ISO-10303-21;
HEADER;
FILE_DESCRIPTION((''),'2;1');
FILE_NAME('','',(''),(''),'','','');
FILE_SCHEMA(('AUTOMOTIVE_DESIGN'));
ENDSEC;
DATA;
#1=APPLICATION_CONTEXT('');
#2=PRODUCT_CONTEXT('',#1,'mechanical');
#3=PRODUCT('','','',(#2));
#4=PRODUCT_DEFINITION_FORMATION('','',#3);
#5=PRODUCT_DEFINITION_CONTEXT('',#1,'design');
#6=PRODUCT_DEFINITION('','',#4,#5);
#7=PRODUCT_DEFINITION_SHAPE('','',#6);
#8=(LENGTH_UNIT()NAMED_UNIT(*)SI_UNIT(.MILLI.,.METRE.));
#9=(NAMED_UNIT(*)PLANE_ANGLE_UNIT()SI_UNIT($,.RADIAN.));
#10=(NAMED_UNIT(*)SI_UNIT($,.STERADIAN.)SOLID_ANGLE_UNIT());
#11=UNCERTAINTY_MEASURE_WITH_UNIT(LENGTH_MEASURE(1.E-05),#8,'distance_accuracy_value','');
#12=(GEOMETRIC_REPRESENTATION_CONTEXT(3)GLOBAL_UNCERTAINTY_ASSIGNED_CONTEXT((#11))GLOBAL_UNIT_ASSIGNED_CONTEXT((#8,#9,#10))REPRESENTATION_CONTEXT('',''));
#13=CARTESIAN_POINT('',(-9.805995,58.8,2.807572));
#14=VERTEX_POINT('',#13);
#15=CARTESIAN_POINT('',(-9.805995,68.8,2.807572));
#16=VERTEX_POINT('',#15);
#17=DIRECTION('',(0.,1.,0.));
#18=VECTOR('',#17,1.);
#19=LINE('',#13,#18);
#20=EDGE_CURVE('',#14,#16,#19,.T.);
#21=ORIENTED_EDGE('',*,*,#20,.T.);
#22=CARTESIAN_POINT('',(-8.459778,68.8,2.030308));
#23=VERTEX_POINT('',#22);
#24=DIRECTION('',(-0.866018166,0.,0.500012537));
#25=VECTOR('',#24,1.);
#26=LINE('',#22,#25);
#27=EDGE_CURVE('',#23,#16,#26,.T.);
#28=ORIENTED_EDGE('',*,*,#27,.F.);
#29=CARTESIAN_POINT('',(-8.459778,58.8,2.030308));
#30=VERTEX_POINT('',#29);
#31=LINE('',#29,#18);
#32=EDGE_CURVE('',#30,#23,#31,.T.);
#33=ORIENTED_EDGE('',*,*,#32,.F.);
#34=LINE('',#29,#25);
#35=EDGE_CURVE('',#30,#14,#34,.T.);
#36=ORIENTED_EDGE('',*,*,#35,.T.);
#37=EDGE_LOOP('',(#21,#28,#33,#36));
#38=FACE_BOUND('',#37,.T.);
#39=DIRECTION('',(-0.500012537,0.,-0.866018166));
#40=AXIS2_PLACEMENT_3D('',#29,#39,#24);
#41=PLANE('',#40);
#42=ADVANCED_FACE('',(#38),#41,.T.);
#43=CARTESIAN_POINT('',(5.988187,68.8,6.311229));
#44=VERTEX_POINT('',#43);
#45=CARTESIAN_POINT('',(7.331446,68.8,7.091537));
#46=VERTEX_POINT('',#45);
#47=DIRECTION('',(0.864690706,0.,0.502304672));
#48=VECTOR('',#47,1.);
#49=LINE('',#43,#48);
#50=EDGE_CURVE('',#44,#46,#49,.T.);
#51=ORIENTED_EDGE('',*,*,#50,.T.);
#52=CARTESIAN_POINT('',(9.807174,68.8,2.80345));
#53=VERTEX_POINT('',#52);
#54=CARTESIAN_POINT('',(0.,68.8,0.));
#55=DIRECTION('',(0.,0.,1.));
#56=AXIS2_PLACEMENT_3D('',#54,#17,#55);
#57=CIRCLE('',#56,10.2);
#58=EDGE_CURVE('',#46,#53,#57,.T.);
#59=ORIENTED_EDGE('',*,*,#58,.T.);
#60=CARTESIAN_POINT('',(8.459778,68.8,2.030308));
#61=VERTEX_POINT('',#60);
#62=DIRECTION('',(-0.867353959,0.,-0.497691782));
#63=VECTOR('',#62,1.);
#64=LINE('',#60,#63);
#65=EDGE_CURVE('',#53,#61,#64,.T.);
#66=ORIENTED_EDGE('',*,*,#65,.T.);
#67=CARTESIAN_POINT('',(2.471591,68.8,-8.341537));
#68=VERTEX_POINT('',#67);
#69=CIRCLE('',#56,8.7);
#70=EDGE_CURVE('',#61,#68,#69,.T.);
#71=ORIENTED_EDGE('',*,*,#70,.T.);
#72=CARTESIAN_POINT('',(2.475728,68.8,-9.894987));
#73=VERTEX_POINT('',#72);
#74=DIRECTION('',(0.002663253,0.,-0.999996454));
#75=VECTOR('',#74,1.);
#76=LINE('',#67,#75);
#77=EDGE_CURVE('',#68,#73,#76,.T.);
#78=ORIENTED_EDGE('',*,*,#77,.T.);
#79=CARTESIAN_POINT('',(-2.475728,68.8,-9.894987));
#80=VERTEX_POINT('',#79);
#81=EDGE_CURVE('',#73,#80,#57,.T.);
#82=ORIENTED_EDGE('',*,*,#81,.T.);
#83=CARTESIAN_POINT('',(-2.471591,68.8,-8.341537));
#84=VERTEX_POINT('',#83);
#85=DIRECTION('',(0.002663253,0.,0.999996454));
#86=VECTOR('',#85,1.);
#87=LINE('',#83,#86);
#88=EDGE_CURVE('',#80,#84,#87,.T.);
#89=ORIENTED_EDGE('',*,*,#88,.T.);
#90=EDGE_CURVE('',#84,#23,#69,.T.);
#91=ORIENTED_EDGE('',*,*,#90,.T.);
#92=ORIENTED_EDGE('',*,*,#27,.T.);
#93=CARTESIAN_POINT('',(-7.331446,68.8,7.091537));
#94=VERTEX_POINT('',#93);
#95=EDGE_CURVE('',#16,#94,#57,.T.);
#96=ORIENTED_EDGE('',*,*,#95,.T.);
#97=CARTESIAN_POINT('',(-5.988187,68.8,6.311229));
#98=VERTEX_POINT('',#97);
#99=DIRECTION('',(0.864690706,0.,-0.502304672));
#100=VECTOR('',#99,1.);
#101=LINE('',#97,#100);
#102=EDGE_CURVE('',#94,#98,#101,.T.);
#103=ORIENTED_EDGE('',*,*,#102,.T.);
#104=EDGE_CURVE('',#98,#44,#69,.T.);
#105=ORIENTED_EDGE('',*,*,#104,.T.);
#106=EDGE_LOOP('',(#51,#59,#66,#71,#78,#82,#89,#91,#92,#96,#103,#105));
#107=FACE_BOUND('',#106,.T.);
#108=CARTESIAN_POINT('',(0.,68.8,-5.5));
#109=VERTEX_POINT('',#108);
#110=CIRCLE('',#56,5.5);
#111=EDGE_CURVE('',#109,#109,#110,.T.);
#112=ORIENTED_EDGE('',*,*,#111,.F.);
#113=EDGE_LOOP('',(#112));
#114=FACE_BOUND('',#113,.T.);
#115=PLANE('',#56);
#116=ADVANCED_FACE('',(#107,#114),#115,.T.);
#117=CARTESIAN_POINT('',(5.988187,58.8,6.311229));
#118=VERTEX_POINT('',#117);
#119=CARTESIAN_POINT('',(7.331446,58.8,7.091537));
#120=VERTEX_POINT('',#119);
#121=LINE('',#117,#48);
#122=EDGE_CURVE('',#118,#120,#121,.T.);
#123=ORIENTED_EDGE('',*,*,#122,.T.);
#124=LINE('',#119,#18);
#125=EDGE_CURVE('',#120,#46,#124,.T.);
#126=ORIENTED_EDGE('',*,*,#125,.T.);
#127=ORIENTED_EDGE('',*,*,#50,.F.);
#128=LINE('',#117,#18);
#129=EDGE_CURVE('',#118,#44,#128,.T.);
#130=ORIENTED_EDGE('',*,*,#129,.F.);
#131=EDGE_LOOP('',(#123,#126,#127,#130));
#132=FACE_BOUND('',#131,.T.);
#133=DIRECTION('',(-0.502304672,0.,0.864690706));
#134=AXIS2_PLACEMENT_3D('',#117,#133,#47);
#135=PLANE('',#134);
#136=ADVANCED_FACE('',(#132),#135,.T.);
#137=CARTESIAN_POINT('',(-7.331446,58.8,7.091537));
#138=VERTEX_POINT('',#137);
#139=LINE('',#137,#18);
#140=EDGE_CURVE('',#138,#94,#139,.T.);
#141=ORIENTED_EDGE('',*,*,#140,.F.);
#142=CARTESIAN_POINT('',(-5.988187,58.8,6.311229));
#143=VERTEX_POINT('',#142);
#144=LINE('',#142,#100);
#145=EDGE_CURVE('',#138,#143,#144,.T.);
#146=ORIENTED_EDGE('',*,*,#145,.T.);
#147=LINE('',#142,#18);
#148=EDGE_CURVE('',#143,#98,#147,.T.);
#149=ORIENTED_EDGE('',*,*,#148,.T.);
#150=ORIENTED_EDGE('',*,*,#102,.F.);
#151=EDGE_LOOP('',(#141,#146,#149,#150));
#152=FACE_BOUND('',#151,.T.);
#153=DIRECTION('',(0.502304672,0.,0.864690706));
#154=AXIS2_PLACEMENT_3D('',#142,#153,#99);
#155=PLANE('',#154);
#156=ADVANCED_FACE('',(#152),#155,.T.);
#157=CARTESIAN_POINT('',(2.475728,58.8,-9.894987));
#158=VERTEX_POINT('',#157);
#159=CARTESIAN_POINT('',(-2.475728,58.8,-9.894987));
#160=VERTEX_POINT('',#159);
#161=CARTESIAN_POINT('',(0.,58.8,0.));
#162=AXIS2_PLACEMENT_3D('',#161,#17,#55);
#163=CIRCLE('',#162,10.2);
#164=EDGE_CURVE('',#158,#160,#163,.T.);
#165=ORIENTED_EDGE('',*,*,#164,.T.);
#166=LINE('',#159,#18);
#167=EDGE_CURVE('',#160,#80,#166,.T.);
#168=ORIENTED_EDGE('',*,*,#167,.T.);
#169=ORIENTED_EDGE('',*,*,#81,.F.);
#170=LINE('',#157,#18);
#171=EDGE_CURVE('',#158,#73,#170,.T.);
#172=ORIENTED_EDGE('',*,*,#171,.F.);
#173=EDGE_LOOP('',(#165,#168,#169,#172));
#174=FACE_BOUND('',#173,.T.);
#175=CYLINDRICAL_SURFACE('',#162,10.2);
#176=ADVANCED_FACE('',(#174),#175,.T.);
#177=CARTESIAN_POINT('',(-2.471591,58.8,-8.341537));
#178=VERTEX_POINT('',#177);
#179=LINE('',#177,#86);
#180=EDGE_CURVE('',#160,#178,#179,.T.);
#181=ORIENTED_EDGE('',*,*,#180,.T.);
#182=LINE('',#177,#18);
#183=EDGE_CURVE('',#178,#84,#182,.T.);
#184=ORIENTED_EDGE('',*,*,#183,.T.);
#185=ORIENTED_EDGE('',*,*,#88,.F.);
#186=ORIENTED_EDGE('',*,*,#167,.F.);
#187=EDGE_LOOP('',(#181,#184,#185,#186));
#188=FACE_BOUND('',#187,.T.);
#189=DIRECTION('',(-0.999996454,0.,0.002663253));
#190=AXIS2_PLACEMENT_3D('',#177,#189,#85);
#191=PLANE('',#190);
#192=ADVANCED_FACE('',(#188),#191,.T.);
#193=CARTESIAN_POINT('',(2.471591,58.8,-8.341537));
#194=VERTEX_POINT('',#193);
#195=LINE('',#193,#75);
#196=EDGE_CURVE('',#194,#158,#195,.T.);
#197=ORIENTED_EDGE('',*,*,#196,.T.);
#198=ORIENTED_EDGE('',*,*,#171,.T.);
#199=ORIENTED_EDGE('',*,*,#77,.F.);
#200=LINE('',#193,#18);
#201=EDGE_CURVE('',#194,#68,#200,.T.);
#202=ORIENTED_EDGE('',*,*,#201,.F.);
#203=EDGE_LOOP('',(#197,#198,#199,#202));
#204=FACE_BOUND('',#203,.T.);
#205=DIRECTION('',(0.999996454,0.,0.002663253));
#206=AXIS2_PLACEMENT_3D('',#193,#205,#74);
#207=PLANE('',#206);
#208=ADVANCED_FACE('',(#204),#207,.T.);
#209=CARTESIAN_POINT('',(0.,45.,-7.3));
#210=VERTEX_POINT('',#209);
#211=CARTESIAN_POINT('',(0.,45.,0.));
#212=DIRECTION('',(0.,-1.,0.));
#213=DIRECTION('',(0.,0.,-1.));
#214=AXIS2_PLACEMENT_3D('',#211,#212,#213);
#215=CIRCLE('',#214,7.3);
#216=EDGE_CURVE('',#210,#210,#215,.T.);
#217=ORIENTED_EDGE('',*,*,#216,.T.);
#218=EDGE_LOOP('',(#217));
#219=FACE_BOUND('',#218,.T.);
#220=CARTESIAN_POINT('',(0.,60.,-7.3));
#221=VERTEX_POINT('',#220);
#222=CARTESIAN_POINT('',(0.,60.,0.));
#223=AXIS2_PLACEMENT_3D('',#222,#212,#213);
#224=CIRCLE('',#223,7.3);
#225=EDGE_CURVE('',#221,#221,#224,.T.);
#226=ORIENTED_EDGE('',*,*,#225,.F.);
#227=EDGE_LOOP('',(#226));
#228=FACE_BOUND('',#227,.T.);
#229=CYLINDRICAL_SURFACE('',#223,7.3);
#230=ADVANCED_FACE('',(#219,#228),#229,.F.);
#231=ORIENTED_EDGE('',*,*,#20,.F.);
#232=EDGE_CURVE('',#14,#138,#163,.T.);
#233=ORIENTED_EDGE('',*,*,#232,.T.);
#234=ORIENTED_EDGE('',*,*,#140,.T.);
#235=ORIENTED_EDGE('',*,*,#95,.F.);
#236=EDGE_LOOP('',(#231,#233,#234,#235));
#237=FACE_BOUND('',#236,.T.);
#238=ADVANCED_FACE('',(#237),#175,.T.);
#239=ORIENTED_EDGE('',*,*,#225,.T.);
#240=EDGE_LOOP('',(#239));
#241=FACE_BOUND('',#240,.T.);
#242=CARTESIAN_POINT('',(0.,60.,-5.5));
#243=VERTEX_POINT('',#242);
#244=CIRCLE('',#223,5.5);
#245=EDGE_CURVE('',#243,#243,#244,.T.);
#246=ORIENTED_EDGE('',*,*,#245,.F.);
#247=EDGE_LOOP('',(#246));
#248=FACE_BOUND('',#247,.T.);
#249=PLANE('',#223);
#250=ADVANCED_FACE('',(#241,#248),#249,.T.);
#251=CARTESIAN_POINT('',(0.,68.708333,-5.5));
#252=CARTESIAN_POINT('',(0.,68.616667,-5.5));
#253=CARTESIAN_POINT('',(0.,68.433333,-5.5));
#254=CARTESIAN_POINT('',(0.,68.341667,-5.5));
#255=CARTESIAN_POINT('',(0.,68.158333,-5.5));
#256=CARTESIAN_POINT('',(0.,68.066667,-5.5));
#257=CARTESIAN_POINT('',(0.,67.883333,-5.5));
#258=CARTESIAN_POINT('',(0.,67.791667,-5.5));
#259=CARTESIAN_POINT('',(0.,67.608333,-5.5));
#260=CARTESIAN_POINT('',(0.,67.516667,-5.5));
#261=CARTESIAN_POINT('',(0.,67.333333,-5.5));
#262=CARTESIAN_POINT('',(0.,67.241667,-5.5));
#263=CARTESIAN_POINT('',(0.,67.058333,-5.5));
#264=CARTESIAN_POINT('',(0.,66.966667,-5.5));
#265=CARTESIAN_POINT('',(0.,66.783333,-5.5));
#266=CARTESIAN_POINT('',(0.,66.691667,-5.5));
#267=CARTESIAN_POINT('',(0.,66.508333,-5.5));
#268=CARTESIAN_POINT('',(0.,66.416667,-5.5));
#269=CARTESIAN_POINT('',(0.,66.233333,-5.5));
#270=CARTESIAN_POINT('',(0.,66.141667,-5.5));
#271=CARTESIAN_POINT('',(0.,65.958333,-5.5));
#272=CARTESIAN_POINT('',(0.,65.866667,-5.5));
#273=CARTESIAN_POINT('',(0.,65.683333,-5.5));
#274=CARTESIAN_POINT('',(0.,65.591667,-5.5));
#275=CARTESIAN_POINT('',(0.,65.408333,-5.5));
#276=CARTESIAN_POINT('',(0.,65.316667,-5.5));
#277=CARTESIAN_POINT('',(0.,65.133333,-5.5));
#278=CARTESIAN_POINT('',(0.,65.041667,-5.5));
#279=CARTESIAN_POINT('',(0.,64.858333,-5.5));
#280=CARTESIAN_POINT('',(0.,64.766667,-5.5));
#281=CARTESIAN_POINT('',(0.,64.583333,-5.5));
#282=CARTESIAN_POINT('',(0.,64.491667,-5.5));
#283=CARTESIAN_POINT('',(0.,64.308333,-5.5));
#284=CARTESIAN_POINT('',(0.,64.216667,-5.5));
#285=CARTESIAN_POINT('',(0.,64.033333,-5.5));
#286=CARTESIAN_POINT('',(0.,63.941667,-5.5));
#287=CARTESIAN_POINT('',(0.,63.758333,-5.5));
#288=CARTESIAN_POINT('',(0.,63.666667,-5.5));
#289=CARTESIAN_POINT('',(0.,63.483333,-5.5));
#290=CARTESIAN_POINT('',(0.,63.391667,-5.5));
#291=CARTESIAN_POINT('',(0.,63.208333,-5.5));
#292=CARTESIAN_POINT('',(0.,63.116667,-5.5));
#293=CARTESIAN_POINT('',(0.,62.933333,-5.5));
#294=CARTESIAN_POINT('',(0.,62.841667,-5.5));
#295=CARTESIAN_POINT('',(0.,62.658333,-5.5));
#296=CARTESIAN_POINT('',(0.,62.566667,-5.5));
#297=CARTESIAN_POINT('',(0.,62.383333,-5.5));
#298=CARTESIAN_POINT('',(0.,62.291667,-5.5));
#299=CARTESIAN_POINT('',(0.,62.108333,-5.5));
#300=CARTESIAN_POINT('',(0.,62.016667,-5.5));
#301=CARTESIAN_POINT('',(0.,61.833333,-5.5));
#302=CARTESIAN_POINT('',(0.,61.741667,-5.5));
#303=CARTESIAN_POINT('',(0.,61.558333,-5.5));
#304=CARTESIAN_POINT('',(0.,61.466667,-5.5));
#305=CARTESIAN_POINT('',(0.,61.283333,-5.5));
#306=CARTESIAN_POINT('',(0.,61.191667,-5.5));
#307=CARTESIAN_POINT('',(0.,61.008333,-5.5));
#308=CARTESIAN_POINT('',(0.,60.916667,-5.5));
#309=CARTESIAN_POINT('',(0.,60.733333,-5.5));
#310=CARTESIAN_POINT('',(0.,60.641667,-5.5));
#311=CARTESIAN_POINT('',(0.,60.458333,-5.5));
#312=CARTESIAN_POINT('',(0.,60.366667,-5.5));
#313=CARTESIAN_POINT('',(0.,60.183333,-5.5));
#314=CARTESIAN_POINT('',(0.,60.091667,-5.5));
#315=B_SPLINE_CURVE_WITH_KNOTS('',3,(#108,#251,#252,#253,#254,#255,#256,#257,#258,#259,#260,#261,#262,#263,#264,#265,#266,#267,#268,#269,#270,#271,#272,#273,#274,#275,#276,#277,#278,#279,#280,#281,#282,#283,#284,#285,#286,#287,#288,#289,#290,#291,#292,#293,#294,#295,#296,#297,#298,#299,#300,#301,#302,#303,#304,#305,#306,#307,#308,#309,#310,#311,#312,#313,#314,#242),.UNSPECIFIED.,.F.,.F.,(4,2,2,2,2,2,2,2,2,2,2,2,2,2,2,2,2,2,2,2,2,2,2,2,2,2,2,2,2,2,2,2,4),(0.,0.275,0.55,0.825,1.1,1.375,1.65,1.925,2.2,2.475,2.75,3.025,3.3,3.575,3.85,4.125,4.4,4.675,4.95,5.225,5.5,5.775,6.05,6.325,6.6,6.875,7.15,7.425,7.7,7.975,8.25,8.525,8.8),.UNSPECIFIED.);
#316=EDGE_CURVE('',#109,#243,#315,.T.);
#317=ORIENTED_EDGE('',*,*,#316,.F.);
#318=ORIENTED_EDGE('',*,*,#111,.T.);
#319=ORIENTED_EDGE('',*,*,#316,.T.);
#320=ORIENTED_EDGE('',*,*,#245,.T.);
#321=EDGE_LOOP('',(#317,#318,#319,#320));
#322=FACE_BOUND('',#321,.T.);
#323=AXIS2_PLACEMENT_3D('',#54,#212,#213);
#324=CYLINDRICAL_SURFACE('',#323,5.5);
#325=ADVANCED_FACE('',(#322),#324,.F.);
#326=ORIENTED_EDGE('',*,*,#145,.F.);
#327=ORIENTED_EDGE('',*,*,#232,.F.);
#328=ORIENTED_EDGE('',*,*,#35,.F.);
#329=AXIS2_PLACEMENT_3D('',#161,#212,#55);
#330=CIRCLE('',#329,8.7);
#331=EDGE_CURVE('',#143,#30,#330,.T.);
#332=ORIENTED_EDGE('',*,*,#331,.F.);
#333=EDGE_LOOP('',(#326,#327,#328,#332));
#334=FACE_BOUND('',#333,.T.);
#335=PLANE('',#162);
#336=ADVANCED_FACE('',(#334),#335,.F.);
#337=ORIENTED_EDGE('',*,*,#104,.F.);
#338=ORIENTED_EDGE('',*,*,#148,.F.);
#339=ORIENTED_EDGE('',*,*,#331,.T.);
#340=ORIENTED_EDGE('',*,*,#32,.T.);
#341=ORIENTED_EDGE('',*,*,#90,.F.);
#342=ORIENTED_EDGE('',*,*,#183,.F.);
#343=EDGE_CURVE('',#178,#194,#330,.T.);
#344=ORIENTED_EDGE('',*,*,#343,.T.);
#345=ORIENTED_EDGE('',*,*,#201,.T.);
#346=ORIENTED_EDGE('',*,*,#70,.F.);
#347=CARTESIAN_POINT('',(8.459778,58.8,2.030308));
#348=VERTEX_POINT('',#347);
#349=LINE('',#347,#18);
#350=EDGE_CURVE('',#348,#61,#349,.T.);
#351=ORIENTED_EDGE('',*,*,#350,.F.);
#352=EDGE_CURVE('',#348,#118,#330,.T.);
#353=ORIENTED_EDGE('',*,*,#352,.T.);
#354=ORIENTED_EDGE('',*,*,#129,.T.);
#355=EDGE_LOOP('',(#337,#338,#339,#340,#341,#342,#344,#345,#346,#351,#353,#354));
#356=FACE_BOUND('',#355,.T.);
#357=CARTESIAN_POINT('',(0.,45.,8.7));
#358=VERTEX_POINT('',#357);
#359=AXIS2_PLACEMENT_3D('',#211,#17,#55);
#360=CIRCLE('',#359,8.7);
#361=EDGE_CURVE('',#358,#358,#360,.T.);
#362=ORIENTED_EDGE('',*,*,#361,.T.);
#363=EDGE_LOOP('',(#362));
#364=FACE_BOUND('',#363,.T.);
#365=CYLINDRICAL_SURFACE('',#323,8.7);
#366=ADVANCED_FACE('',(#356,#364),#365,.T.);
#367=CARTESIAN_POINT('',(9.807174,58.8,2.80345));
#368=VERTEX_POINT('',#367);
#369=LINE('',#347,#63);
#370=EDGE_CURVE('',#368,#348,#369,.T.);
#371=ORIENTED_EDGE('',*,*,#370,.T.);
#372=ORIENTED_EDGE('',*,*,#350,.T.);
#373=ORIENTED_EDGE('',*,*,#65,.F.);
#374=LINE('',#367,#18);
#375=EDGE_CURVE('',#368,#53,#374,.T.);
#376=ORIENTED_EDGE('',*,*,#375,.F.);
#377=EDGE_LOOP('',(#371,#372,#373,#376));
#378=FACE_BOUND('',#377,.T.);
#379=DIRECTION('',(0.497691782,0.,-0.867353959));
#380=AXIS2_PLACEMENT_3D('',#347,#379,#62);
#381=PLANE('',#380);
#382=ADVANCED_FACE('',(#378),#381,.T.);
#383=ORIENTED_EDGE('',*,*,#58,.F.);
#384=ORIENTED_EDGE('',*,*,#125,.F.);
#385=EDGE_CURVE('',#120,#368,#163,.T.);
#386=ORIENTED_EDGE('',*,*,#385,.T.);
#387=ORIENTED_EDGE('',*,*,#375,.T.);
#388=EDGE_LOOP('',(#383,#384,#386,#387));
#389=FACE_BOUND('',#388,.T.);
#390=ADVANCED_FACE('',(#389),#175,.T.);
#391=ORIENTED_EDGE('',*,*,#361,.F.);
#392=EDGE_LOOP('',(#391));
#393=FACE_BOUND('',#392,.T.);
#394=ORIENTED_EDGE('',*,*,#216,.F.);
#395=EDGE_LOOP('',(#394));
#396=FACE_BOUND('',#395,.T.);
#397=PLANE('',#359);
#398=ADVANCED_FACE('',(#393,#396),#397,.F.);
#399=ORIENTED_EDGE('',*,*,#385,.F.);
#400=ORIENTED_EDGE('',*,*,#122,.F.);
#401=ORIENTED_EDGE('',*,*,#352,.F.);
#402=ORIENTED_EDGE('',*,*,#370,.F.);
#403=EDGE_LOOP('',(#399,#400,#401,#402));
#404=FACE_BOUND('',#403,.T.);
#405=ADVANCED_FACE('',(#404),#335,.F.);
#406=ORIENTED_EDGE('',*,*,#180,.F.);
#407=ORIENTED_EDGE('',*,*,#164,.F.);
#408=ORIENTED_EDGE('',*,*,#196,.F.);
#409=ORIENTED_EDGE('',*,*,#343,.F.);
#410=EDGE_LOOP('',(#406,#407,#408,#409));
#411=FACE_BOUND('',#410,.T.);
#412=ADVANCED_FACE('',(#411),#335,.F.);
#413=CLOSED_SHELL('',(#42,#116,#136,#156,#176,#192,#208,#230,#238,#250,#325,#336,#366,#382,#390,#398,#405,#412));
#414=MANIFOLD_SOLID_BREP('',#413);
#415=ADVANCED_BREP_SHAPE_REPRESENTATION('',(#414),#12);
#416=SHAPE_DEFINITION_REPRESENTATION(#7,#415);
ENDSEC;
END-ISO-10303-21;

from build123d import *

# Parameters (mm, degrees)
SKETCH1_R           = 8.7
SKETCH1_R_2         = 5.5
BOSS_EXTRUDE1_DEPTH = 68.8
BOSS_EXTRUDE2_START = 4
SKETCH2_R           = 16
SKETCH2_R_2         = 5.5
BOSS_EXTRUDE2_DEPTH = 4
FILLET1_R           = 2
FILLET2_R           = 1
BOSS_EXTRUDE6_START = -10
BOSS_EXTRUDE6_DEPTH = 10
CUT_EXTRUDE1_START  = -23
SKETCH10_R          = 8.7
SKETCH10_R_2        = 7.2
CUT_EXTRUDE1_DEPTH  = 23
SKETCH11_R          = 18.546055896
CUT_EXTRUDE2_DEPTH  = 54.972215104
SKETCH12_R          = 7.3
CUT_EXTRUDE3_DEPTH  = 15


with BuildPart() as part:
    # Sketch1 → Boss-Extrude1 (new body)
    with BuildSketch(Plane(origin=(0, 0, 0), x_dir=(1, 0, 0), z_dir=(0, 1, 0))):
        with Locations(Location((0, 0, 0), (0, 0, 90))):
            Circle(SKETCH1_R)
        with Locations(Location((0, 0, 0), (0, 0, 90))):
            Circle(SKETCH1_R_2, mode=Mode.SUBTRACT)
    extrude(amount=BOSS_EXTRUDE1_DEPTH)

    # Sketch2 → Boss-Extrude2 (add)
    with BuildSketch(Plane.XZ.offset(BOSS_EXTRUDE2_START)):
        with Locations(Location((0, 0, 0), (0, 0, 270))):
            Circle(SKETCH2_R)
        with Locations(Location((0, 0, 0), (0, 0, 270))):
            Circle(SKETCH2_R_2, mode=Mode.SUBTRACT)
    extrude(amount=-BOSS_EXTRUDE2_DEPTH)

    # Fillet1
    fillet1_edges = [part.edges().sort_by_distance(p)[0] for p in [
        (0, 0, 16),
        (0, -4, 16),
    ]]
    fillet(fillet1_edges, radius=FILLET1_R - 0.0001)  # a hair under: the kernel refuses the full size

    # Fillet2
    fillet2_edges = [part.edges().sort_by_distance(p)[0] for p in [
        (0, 0, 8.7),
    ]]
    fillet(fillet2_edges, radius=FILLET2_R)

    # Sketch7 → Boss-Extrude6 (add)
    with BuildSketch(Plane(origin=(0, 68.8, 0), x_dir=(1, 0, 0), z_dir=(0, 1, 0)).offset(BOSS_EXTRUDE6_START)):
        with BuildLine():
            Line((-8.459778344, -2.030307951), (-9.805994948, -2.807572454))
            ThreePointArc((-9.805994948, -2.807572454), (-8.832386986, -5.101856537), (-7.331446138, -7.091537035))
            Line((-7.331446138, -7.091537035), (-5.988187435, -6.311228981))
            ThreePointArc((-5.988187435, -6.311228981), (-7.534421013, -4.35), (-8.459778344, -2.030307951))
        make_face()
        with BuildLine():
            Line((-2.471590909, 8.341536931), (-2.475728155, 9.89498712))
            ThreePointArc((-2.475728155, 9.89498712), (0, 10.2), (2.475728155, 9.89498712))
            Line((2.475728155, 9.89498712), (2.471590909, 8.341536931))
            ThreePointArc((2.471590909, 8.341536931), (0, 8.7), (-2.471590909, 8.341536931))
        make_face()
        with BuildLine():
            Line((8.459778344, -2.030307951), (9.807174294, -2.803450085))
            ThreePointArc((9.807174294, -2.803450085), (8.833459119, -5.1), (7.331446138, -7.091537035))
            Line((7.331446138, -7.091537035), (5.988187435, -6.311228981))
            ThreePointArc((5.988187435, -6.311228981), (7.534421013, -4.35), (8.459778344, -2.030307951))
        make_face()
    extrude(amount=BOSS_EXTRUDE6_DEPTH)

    # Sketch10 → Cut-Extrude1 (cut)
    with BuildSketch(Plane(origin=(0, 45, 0), x_dir=(1, 0, 0), z_dir=(0, 1, 0)).offset(CUT_EXTRUDE1_START)):
        with Locations(Location((0, 0, 0), (0, 0, 90))):
            Circle(SKETCH10_R)
        with Locations(Location((0, 0, 0), (0, 0, 270))):
            Circle(SKETCH10_R_2, mode=Mode.SUBTRACT)
    extrude(amount=CUT_EXTRUDE1_DEPTH, mode=Mode.SUBTRACT)

    # Sketch11 → Cut-Extrude2 (cut, through all)
    with BuildSketch(Plane.XZ.offset(-45)):
        Circle(SKETCH11_R)
    extrude(amount=CUT_EXTRUDE2_DEPTH, mode=Mode.SUBTRACT)

    # Sketch12 → Cut-Extrude3 (cut)
    with BuildSketch(Plane.XZ.offset(-45)):
        with Locations(Location((0, 0, 0), (0, 0, 270))):
            Circle(SKETCH12_R)
    extrude(amount=-CUT_EXTRUDE3_DEPTH, mode=Mode.SUBTRACT)


solid = part.part
